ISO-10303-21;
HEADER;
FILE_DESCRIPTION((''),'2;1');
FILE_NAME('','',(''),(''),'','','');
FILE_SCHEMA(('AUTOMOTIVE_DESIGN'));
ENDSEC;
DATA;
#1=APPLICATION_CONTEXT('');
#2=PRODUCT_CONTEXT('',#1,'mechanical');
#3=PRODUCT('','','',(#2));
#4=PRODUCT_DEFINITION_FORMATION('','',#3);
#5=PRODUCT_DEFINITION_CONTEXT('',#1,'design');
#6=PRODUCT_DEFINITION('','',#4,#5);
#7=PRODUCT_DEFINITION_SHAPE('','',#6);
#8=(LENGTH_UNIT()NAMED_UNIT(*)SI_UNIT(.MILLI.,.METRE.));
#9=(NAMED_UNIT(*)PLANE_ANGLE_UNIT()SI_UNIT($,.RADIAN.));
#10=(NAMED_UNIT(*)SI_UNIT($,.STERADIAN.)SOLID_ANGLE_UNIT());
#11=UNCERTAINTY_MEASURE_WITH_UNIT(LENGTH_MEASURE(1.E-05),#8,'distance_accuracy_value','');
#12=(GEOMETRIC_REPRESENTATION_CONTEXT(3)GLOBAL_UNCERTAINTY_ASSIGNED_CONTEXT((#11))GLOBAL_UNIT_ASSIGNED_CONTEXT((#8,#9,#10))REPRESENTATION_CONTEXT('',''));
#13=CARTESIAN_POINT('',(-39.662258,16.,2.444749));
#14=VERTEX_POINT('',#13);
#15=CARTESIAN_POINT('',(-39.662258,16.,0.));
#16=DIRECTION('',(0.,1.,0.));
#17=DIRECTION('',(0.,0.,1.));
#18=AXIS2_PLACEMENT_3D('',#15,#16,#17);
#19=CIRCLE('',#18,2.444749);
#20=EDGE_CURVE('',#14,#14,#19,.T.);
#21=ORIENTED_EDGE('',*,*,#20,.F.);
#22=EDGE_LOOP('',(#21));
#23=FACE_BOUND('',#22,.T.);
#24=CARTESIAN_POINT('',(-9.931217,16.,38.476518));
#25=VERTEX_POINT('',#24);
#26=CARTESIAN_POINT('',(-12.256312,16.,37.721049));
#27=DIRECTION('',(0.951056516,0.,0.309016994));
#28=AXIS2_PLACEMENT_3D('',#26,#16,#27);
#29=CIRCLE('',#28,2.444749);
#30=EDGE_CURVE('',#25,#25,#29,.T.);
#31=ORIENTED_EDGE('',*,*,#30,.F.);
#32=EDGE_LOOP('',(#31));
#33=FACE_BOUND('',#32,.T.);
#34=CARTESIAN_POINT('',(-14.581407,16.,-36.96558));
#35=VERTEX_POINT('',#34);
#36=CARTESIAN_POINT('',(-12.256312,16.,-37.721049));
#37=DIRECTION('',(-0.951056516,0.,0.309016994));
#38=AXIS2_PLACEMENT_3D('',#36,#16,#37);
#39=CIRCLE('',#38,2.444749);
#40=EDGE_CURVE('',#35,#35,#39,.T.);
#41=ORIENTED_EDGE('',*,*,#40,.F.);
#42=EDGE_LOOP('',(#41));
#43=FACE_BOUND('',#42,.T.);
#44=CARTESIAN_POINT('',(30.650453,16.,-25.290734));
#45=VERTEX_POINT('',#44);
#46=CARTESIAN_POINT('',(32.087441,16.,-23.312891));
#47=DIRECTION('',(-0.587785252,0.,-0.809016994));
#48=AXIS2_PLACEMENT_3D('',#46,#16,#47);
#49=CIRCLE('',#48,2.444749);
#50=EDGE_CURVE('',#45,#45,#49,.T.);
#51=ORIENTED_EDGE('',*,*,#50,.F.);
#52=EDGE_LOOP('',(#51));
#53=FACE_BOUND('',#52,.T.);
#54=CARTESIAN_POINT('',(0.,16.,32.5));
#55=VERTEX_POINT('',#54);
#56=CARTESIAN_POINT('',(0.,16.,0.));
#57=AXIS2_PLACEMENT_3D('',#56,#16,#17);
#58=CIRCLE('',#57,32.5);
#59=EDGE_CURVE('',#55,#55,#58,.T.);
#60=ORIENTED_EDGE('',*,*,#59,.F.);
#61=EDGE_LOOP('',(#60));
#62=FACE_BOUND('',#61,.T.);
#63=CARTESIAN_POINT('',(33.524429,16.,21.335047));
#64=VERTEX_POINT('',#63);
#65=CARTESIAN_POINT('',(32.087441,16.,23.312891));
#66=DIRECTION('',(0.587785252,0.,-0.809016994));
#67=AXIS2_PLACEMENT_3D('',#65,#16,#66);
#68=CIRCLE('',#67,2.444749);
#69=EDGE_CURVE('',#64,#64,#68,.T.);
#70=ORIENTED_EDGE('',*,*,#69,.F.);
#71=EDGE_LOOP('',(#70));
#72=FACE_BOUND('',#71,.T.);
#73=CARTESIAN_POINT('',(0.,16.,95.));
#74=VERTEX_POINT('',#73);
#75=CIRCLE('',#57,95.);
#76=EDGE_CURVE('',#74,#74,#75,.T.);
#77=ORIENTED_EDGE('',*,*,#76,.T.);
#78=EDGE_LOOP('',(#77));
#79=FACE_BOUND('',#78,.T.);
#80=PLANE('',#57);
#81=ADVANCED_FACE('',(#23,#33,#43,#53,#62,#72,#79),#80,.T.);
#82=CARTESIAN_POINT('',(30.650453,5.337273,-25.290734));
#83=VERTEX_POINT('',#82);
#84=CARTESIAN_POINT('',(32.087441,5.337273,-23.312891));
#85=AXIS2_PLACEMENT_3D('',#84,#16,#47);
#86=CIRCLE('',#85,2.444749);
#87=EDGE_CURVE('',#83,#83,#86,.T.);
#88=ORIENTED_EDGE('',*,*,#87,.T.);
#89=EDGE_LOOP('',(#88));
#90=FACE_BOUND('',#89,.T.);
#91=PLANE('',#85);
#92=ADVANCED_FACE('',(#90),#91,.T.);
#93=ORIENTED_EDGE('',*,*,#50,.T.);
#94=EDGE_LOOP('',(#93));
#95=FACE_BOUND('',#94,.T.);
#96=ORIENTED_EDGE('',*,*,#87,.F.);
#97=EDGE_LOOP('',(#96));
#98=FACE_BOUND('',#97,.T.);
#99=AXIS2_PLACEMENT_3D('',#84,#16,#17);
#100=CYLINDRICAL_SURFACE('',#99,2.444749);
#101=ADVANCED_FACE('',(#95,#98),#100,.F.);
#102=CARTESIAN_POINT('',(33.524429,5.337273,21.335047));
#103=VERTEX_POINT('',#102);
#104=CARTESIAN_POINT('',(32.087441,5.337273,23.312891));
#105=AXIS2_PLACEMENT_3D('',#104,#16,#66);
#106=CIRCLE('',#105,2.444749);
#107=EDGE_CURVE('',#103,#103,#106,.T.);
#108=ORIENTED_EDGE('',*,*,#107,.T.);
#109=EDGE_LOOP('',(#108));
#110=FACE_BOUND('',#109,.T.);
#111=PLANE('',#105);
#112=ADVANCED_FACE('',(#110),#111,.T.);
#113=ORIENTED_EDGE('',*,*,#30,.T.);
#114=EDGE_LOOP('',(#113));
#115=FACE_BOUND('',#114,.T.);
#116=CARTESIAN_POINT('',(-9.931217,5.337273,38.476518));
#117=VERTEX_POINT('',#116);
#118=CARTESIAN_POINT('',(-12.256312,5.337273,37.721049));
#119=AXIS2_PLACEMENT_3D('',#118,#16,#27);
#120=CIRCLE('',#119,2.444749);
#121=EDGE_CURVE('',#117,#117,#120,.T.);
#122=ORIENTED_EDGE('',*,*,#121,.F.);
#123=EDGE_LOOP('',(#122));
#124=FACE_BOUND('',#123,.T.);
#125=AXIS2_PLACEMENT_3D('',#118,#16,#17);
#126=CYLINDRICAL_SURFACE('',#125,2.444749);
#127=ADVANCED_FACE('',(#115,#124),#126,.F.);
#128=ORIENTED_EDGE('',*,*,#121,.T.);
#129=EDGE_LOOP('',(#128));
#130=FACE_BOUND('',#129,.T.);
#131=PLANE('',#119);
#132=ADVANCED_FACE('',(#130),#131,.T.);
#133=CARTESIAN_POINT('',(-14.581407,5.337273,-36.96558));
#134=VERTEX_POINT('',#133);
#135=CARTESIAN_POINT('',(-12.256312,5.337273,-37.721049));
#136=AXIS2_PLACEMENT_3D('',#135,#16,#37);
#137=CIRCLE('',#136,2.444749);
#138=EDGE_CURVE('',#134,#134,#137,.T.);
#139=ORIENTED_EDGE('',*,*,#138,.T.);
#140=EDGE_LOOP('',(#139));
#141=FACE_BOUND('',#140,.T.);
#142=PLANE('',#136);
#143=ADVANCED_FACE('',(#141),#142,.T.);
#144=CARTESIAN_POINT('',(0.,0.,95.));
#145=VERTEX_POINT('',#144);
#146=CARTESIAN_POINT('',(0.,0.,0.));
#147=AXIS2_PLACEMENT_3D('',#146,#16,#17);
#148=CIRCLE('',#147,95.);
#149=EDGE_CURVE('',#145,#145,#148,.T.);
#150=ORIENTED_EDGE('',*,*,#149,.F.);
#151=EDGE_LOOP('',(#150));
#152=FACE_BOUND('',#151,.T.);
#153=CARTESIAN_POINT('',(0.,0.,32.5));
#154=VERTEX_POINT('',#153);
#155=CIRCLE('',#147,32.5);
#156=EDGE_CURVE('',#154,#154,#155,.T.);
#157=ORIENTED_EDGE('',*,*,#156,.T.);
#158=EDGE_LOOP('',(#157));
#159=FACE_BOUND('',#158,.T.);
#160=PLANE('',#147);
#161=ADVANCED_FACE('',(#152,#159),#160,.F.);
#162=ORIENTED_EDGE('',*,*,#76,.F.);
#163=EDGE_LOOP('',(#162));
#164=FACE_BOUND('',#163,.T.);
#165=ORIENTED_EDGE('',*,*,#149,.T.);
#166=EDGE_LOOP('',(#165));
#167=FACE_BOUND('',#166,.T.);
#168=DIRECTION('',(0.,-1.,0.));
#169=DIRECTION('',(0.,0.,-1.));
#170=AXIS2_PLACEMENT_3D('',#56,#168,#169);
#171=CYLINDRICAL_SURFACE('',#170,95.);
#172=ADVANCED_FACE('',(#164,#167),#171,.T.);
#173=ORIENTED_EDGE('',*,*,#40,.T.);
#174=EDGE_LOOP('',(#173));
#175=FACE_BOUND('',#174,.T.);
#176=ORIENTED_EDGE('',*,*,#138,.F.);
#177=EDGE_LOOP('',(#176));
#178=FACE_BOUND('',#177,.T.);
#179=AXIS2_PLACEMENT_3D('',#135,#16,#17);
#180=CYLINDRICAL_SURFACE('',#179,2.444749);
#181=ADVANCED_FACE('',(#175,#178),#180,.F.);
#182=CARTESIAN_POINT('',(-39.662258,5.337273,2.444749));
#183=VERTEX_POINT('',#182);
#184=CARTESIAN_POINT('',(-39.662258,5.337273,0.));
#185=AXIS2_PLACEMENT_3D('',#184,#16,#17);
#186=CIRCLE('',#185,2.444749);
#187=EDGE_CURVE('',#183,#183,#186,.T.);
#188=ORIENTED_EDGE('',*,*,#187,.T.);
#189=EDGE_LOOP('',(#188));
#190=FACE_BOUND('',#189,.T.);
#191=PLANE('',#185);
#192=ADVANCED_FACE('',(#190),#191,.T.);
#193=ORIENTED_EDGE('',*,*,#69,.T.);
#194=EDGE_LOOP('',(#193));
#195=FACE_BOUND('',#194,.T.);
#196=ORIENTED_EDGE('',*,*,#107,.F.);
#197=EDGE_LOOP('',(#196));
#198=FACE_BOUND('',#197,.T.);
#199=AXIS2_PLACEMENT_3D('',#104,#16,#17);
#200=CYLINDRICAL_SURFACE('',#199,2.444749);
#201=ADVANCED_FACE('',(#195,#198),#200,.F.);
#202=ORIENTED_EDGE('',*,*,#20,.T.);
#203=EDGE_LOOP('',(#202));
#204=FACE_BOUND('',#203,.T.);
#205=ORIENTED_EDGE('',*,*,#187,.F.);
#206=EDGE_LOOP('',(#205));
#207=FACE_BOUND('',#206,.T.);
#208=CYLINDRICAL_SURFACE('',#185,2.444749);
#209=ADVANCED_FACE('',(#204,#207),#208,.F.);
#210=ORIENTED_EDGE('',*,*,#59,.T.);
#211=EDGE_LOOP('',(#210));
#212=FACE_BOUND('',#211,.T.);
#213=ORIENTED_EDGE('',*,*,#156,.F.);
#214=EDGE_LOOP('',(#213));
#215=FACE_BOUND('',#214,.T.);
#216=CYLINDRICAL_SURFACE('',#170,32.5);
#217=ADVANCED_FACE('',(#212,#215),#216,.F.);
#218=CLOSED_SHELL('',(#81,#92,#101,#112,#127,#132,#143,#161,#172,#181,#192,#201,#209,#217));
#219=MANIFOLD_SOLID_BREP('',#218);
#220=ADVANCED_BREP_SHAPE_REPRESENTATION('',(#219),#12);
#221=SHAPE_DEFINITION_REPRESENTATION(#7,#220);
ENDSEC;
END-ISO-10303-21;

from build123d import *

# Parameters (mm, degrees)
SKETCH1_R           = 95
BOSS_EXTRUDE1_DEPTH = 16
SKETCH2_R           = 32.5
CUT_EXTRUDE1_DEPTH  = 136.299667405
SKETCH3_R           = 2.44474926
CUT_EXTRUDE2_DEPTH  = 10.66272714
CIRPATTERN1_COUNT   = 5


with BuildPart() as part:
    # Sketch1 → Boss-Extrude1 (new body)
    with BuildSketch(Plane(origin=(0, 0, 0), x_dir=(1, 0, 0), z_dir=(0, 1, 0))):
        Circle(SKETCH1_R)
    extrude(amount=BOSS_EXTRUDE1_DEPTH)

    # Sketch2 → Cut-Extrude1 (cut, through all)
    with BuildSketch(Plane(origin=(0, 0, 0), x_dir=(1, 0, 0), z_dir=(0, 1, 0))):
        Circle(SKETCH2_R)
    extrude(amount=CUT_EXTRUDE1_DEPTH, mode=Mode.SUBTRACT)

    # Sketch3 → Cut-Extrude2 (cut)
    with BuildSketch(Plane(origin=(0, 16, 0), x_dir=(1, 0, 0), z_dir=(0, 1, 0))):
        with Locations((-39.662258367, 0)):
            Circle(SKETCH3_R)
    cut_extrude2 = extrude(amount=-CUT_EXTRUDE2_DEPTH, mode=Mode.SUBTRACT)

    # CirPattern1: Cut-Extrude2 ×5 about axis
    cirpattern1_axis = Axis((0, 0, 0), (0, 1, 0))
    for i in range(1, CIRPATTERN1_COUNT):
        add(cut_extrude2.rotate(cirpattern1_axis, i * 360 / CIRPATTERN1_COUNT), mode=Mode.SUBTRACT)


solid = part.part
